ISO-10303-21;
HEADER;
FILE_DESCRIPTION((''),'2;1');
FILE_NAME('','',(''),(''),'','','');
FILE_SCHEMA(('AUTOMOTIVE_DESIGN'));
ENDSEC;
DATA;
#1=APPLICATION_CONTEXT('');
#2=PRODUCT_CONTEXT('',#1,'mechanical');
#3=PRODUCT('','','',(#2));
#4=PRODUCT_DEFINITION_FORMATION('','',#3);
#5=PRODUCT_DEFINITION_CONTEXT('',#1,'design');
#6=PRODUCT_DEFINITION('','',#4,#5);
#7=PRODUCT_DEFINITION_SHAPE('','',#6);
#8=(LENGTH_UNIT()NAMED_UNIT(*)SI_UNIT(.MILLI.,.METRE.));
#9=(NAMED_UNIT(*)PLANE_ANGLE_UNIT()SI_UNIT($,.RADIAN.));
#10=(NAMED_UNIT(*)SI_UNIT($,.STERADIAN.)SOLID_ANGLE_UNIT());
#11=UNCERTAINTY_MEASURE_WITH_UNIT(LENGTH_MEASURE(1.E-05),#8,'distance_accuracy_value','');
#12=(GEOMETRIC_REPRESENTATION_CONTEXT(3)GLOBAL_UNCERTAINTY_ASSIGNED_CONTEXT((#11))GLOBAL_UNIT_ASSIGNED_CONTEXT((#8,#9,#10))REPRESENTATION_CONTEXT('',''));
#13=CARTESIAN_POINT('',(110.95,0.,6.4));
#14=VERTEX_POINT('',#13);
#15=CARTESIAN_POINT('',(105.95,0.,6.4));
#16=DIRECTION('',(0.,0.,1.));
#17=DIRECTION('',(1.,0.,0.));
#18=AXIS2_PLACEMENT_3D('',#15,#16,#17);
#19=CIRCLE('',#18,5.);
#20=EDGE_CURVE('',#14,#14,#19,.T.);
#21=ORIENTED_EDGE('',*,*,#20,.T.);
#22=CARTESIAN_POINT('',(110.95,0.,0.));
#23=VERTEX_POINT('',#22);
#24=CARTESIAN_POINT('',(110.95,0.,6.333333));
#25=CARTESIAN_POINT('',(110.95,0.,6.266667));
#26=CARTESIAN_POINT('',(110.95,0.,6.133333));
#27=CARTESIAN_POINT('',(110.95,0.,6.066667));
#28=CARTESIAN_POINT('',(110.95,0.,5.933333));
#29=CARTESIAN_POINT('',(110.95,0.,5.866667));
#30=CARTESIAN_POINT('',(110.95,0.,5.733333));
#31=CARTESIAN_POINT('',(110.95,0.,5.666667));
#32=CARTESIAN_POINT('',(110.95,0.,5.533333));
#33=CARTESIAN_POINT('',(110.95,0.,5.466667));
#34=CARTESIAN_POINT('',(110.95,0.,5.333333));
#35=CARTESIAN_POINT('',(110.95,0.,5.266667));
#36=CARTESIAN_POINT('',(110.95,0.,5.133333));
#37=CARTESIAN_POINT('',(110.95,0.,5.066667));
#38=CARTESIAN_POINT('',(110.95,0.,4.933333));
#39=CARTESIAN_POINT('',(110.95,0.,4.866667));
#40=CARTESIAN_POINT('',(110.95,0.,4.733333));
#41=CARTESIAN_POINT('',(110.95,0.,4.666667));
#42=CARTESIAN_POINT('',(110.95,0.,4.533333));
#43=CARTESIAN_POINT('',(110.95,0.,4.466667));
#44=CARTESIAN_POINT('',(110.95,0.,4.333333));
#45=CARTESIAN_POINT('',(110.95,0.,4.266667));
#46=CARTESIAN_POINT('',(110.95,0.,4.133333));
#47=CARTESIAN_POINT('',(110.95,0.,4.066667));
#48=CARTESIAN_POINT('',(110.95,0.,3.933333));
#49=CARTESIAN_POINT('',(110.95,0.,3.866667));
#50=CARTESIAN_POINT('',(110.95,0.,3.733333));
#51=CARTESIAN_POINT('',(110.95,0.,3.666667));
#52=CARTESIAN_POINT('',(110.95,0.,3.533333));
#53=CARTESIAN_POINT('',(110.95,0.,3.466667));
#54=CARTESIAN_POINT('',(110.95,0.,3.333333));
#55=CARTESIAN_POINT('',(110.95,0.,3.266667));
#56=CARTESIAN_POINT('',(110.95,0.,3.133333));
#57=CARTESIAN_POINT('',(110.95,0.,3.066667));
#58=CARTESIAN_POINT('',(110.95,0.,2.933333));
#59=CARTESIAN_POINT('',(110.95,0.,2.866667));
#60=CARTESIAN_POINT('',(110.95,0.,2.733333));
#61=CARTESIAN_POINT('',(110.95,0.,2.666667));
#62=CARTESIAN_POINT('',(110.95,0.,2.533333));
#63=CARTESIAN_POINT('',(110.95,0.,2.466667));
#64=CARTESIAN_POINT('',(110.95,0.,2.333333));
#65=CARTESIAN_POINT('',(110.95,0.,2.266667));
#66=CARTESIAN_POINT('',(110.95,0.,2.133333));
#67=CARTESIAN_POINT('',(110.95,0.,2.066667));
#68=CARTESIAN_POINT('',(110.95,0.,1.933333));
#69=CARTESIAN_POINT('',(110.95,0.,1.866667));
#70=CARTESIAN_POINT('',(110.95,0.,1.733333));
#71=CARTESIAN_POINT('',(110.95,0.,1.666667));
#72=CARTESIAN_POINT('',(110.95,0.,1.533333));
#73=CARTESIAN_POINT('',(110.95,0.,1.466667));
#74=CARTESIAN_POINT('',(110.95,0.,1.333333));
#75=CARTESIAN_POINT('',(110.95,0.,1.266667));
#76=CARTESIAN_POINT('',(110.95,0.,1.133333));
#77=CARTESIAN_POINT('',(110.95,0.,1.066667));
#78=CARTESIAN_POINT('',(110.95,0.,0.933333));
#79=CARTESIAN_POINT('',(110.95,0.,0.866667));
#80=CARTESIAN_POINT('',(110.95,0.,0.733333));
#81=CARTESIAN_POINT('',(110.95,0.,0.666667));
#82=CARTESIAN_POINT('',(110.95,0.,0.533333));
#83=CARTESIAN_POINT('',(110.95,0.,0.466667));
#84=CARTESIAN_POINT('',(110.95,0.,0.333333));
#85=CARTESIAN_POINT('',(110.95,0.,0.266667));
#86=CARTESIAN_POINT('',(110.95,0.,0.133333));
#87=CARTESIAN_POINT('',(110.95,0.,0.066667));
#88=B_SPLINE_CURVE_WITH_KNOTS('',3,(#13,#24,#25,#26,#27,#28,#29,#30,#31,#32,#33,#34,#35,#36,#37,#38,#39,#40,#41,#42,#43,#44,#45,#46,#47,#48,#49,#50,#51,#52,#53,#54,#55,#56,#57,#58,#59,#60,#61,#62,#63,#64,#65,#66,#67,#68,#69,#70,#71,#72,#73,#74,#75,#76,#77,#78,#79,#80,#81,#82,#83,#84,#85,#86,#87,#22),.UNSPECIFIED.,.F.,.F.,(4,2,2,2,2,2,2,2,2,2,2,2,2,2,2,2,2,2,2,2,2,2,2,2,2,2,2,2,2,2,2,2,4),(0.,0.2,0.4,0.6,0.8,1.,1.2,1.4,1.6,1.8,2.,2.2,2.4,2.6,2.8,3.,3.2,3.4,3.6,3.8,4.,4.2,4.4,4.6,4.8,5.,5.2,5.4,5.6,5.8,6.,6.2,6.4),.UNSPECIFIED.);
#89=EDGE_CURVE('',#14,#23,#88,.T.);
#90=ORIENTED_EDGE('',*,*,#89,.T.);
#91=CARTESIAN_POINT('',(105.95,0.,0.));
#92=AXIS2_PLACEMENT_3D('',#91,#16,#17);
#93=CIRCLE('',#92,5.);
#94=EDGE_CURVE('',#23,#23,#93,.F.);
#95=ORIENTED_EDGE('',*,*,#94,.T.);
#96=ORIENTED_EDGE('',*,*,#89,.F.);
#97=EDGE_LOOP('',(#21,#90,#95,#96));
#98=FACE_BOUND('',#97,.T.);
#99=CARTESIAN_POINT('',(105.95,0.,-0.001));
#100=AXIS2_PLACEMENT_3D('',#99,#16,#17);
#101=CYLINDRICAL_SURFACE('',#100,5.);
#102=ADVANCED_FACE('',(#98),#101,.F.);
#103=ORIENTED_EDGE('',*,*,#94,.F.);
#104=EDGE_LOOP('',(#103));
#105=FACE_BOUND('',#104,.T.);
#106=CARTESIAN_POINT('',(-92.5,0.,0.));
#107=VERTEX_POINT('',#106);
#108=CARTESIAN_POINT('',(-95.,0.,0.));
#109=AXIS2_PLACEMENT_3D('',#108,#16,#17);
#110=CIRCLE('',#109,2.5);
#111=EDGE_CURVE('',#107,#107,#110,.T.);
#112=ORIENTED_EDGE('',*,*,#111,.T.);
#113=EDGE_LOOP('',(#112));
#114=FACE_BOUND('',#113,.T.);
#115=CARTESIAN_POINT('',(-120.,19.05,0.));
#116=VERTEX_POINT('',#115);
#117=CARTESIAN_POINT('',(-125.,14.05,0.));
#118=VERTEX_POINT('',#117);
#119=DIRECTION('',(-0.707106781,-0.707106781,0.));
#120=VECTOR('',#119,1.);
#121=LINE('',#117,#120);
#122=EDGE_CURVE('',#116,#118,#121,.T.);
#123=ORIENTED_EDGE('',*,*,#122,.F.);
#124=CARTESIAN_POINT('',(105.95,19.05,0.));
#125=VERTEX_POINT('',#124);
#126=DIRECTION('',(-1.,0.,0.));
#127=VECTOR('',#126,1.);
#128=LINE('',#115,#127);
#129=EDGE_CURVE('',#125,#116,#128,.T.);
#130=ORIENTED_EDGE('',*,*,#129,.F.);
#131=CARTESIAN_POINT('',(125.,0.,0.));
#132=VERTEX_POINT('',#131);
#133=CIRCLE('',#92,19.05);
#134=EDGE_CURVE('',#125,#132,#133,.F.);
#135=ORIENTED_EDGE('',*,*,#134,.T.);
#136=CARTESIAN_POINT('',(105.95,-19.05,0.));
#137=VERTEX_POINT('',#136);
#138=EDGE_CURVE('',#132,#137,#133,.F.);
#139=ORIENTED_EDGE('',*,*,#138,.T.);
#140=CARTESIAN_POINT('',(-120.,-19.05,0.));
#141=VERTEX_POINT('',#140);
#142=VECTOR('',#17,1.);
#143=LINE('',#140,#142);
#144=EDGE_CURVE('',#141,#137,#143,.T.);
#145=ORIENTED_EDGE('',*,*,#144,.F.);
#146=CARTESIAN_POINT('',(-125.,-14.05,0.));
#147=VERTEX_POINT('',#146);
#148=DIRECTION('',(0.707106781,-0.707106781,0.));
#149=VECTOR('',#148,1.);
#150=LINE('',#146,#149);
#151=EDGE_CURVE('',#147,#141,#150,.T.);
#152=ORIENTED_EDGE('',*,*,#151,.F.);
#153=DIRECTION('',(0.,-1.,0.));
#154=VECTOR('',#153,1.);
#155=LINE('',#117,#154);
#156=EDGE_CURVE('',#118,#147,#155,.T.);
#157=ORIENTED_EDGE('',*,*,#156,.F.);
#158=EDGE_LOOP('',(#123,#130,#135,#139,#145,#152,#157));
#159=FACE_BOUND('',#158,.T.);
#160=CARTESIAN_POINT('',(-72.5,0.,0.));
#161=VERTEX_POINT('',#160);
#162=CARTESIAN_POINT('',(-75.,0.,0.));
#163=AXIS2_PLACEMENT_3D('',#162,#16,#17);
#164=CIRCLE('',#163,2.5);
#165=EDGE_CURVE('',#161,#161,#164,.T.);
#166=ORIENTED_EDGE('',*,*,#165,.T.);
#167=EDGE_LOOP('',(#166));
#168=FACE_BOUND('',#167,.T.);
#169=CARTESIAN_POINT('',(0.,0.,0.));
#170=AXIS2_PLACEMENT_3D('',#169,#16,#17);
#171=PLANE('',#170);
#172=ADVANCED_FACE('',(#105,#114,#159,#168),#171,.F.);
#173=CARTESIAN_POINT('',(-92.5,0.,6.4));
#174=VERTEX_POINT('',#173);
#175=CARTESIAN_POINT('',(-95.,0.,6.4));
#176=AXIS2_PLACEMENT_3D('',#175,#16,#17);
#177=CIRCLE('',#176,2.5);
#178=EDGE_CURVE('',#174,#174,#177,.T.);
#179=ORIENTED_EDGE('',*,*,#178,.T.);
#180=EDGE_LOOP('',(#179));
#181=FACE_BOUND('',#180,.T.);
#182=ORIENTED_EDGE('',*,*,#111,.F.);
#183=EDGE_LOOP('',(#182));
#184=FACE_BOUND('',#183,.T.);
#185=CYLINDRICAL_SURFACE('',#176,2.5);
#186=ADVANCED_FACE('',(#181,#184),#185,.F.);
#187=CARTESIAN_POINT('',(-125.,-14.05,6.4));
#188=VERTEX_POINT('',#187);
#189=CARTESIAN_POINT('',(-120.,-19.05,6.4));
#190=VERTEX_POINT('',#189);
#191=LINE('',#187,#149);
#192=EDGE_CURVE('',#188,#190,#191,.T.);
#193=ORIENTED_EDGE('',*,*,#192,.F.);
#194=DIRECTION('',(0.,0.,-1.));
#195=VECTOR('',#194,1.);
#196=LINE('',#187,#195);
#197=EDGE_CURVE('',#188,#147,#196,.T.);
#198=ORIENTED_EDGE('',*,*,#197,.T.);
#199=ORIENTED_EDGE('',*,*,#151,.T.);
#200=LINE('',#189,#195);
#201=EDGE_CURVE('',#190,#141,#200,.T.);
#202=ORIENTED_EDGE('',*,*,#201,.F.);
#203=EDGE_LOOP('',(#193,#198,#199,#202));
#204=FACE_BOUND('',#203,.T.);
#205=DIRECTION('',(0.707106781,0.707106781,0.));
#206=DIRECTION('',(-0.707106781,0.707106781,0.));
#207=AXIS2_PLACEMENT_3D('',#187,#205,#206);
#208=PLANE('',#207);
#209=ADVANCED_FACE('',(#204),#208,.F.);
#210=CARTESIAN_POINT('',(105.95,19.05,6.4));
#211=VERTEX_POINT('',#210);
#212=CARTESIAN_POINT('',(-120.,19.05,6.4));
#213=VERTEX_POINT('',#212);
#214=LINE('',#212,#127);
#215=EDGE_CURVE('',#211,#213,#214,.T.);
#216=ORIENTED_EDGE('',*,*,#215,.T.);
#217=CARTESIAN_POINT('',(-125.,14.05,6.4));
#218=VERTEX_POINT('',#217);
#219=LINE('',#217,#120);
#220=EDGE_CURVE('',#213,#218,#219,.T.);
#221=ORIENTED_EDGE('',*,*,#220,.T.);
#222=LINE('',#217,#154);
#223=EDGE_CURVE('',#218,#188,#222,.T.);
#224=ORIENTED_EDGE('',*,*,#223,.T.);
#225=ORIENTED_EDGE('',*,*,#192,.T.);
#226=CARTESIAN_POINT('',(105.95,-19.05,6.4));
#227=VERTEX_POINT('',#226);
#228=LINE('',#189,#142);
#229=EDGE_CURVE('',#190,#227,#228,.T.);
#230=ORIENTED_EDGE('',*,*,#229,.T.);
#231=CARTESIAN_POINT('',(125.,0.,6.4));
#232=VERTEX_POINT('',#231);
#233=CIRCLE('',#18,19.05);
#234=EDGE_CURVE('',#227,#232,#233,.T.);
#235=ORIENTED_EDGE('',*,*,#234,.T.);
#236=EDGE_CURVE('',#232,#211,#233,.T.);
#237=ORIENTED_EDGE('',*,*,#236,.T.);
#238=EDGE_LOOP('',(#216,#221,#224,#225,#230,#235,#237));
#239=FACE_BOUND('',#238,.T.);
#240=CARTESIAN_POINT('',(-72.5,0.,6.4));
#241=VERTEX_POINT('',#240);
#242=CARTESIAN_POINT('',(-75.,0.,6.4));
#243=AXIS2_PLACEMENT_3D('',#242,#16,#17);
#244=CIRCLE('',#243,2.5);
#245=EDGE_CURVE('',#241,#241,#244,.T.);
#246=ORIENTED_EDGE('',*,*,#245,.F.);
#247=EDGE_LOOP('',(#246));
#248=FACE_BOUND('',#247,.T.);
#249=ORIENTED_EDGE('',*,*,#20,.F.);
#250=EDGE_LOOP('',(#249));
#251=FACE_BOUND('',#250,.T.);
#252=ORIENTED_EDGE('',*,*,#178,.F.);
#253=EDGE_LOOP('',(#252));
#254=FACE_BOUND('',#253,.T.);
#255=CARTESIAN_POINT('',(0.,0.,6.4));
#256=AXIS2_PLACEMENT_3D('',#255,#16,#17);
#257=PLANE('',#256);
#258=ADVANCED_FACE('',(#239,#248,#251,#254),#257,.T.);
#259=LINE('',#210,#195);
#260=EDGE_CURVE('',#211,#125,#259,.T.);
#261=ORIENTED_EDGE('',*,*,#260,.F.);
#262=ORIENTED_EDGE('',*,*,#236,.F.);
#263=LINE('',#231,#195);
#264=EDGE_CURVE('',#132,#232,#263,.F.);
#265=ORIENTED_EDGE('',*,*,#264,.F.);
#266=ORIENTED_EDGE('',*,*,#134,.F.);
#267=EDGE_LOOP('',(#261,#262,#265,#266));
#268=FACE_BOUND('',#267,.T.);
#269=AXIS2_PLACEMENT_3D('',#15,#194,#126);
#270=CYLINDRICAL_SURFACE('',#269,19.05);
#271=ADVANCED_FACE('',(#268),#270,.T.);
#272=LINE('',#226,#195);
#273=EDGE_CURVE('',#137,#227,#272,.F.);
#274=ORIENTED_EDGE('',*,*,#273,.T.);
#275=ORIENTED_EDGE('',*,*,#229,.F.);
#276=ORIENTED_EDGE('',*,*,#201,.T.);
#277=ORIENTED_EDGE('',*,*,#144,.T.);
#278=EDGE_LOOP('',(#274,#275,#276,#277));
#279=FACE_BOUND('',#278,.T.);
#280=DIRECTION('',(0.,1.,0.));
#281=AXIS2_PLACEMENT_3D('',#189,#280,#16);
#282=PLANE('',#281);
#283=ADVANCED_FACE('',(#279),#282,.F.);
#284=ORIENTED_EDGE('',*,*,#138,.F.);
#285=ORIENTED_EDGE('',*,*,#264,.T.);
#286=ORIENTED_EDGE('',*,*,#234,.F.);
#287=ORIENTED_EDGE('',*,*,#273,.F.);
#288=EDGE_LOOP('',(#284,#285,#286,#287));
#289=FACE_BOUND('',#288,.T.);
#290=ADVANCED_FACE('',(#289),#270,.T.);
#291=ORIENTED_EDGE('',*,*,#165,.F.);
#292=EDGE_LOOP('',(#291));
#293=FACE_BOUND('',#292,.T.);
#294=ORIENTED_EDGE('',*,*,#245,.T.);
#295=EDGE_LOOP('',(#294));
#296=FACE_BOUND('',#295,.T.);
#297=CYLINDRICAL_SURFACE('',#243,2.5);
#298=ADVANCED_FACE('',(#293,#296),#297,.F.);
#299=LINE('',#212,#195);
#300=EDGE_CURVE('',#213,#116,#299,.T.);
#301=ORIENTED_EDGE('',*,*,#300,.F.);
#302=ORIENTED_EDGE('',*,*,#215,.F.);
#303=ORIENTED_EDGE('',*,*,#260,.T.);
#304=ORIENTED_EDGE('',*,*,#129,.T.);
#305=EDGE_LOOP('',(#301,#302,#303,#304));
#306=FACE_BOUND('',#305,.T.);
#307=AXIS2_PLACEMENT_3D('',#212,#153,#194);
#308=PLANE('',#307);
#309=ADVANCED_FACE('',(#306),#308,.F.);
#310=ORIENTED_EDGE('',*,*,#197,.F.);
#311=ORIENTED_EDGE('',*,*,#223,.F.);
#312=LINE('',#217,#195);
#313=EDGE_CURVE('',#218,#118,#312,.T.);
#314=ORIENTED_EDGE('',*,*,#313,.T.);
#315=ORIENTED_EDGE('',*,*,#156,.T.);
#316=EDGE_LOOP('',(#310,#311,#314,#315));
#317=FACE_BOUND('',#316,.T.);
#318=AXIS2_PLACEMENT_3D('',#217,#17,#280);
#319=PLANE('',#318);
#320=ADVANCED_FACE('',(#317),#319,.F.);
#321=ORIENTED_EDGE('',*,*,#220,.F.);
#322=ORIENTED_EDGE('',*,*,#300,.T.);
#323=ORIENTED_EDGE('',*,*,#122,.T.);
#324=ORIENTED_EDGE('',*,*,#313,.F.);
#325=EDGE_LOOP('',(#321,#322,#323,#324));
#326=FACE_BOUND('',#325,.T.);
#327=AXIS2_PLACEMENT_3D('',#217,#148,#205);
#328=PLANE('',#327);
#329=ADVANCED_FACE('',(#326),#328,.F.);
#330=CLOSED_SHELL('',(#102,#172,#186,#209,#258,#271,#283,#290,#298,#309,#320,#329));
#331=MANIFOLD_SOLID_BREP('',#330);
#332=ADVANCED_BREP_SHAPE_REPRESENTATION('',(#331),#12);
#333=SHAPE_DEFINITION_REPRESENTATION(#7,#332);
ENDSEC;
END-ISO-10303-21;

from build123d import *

# Parameters (mm, degrees)
BOSS_EXTRUDE1_DEPTH   = 6.4
F_5_0MM_DOWEL_HOLE1_D = 5
FILLET1_R             = 19.05
CUT_EXTRUDE1_REACH    = 128.605
SKETCH9_R             = 5


with BuildPart() as part:
    # Sketch1 → Boss-Extrude1 (new body)
    with BuildSketch(Plane.XY):
        Polygon((-120, 19.05), (125, 19.05), (125, -19.05), (-120, -19.05), (-125, -14.05), (-125, 14.05), align=None)
    extrude(amount=BOSS_EXTRUDE1_DEPTH)

    # Ø5.0mm Dowel Hole1 (through all)
    with Locations(Plane.XY.offset(6.4)):
        with Locations((-75, 0), (-95, 0)):
            Hole(F_5_0MM_DOWEL_HOLE1_D / 2)

    # Fillet1
    fillet1_edges = [part.edges().sort_by_distance(p)[0] for p in [
        (125, -19.05, 3.2),
        (125, 19.05, 3.2),
    ]]
    fillet(fillet1_edges, radius=FILLET1_R - 0.0001)  # a hair under: the kernel refuses the full size

    # Sketch9 → Cut-Extrude1 (cut, up to next)
    with BuildSketch(Plane.XY.offset(6.4), mode=Mode.PRIVATE) as cut_extrude1_sk1:
        with Locations((105.95, 0)):
            Circle(SKETCH9_R)
    cut_extrude1_tool1 = extrude(cut_extrude1_sk1.sketch, amount=-CUT_EXTRUDE1_REACH, mode=Mode.PRIVATE) & part.part
    add(cut_extrude1_tool1.solids().sort_by_distance((105.95, 0, 6.4))[0], mode=Mode.SUBTRACT)


solid = part.part
